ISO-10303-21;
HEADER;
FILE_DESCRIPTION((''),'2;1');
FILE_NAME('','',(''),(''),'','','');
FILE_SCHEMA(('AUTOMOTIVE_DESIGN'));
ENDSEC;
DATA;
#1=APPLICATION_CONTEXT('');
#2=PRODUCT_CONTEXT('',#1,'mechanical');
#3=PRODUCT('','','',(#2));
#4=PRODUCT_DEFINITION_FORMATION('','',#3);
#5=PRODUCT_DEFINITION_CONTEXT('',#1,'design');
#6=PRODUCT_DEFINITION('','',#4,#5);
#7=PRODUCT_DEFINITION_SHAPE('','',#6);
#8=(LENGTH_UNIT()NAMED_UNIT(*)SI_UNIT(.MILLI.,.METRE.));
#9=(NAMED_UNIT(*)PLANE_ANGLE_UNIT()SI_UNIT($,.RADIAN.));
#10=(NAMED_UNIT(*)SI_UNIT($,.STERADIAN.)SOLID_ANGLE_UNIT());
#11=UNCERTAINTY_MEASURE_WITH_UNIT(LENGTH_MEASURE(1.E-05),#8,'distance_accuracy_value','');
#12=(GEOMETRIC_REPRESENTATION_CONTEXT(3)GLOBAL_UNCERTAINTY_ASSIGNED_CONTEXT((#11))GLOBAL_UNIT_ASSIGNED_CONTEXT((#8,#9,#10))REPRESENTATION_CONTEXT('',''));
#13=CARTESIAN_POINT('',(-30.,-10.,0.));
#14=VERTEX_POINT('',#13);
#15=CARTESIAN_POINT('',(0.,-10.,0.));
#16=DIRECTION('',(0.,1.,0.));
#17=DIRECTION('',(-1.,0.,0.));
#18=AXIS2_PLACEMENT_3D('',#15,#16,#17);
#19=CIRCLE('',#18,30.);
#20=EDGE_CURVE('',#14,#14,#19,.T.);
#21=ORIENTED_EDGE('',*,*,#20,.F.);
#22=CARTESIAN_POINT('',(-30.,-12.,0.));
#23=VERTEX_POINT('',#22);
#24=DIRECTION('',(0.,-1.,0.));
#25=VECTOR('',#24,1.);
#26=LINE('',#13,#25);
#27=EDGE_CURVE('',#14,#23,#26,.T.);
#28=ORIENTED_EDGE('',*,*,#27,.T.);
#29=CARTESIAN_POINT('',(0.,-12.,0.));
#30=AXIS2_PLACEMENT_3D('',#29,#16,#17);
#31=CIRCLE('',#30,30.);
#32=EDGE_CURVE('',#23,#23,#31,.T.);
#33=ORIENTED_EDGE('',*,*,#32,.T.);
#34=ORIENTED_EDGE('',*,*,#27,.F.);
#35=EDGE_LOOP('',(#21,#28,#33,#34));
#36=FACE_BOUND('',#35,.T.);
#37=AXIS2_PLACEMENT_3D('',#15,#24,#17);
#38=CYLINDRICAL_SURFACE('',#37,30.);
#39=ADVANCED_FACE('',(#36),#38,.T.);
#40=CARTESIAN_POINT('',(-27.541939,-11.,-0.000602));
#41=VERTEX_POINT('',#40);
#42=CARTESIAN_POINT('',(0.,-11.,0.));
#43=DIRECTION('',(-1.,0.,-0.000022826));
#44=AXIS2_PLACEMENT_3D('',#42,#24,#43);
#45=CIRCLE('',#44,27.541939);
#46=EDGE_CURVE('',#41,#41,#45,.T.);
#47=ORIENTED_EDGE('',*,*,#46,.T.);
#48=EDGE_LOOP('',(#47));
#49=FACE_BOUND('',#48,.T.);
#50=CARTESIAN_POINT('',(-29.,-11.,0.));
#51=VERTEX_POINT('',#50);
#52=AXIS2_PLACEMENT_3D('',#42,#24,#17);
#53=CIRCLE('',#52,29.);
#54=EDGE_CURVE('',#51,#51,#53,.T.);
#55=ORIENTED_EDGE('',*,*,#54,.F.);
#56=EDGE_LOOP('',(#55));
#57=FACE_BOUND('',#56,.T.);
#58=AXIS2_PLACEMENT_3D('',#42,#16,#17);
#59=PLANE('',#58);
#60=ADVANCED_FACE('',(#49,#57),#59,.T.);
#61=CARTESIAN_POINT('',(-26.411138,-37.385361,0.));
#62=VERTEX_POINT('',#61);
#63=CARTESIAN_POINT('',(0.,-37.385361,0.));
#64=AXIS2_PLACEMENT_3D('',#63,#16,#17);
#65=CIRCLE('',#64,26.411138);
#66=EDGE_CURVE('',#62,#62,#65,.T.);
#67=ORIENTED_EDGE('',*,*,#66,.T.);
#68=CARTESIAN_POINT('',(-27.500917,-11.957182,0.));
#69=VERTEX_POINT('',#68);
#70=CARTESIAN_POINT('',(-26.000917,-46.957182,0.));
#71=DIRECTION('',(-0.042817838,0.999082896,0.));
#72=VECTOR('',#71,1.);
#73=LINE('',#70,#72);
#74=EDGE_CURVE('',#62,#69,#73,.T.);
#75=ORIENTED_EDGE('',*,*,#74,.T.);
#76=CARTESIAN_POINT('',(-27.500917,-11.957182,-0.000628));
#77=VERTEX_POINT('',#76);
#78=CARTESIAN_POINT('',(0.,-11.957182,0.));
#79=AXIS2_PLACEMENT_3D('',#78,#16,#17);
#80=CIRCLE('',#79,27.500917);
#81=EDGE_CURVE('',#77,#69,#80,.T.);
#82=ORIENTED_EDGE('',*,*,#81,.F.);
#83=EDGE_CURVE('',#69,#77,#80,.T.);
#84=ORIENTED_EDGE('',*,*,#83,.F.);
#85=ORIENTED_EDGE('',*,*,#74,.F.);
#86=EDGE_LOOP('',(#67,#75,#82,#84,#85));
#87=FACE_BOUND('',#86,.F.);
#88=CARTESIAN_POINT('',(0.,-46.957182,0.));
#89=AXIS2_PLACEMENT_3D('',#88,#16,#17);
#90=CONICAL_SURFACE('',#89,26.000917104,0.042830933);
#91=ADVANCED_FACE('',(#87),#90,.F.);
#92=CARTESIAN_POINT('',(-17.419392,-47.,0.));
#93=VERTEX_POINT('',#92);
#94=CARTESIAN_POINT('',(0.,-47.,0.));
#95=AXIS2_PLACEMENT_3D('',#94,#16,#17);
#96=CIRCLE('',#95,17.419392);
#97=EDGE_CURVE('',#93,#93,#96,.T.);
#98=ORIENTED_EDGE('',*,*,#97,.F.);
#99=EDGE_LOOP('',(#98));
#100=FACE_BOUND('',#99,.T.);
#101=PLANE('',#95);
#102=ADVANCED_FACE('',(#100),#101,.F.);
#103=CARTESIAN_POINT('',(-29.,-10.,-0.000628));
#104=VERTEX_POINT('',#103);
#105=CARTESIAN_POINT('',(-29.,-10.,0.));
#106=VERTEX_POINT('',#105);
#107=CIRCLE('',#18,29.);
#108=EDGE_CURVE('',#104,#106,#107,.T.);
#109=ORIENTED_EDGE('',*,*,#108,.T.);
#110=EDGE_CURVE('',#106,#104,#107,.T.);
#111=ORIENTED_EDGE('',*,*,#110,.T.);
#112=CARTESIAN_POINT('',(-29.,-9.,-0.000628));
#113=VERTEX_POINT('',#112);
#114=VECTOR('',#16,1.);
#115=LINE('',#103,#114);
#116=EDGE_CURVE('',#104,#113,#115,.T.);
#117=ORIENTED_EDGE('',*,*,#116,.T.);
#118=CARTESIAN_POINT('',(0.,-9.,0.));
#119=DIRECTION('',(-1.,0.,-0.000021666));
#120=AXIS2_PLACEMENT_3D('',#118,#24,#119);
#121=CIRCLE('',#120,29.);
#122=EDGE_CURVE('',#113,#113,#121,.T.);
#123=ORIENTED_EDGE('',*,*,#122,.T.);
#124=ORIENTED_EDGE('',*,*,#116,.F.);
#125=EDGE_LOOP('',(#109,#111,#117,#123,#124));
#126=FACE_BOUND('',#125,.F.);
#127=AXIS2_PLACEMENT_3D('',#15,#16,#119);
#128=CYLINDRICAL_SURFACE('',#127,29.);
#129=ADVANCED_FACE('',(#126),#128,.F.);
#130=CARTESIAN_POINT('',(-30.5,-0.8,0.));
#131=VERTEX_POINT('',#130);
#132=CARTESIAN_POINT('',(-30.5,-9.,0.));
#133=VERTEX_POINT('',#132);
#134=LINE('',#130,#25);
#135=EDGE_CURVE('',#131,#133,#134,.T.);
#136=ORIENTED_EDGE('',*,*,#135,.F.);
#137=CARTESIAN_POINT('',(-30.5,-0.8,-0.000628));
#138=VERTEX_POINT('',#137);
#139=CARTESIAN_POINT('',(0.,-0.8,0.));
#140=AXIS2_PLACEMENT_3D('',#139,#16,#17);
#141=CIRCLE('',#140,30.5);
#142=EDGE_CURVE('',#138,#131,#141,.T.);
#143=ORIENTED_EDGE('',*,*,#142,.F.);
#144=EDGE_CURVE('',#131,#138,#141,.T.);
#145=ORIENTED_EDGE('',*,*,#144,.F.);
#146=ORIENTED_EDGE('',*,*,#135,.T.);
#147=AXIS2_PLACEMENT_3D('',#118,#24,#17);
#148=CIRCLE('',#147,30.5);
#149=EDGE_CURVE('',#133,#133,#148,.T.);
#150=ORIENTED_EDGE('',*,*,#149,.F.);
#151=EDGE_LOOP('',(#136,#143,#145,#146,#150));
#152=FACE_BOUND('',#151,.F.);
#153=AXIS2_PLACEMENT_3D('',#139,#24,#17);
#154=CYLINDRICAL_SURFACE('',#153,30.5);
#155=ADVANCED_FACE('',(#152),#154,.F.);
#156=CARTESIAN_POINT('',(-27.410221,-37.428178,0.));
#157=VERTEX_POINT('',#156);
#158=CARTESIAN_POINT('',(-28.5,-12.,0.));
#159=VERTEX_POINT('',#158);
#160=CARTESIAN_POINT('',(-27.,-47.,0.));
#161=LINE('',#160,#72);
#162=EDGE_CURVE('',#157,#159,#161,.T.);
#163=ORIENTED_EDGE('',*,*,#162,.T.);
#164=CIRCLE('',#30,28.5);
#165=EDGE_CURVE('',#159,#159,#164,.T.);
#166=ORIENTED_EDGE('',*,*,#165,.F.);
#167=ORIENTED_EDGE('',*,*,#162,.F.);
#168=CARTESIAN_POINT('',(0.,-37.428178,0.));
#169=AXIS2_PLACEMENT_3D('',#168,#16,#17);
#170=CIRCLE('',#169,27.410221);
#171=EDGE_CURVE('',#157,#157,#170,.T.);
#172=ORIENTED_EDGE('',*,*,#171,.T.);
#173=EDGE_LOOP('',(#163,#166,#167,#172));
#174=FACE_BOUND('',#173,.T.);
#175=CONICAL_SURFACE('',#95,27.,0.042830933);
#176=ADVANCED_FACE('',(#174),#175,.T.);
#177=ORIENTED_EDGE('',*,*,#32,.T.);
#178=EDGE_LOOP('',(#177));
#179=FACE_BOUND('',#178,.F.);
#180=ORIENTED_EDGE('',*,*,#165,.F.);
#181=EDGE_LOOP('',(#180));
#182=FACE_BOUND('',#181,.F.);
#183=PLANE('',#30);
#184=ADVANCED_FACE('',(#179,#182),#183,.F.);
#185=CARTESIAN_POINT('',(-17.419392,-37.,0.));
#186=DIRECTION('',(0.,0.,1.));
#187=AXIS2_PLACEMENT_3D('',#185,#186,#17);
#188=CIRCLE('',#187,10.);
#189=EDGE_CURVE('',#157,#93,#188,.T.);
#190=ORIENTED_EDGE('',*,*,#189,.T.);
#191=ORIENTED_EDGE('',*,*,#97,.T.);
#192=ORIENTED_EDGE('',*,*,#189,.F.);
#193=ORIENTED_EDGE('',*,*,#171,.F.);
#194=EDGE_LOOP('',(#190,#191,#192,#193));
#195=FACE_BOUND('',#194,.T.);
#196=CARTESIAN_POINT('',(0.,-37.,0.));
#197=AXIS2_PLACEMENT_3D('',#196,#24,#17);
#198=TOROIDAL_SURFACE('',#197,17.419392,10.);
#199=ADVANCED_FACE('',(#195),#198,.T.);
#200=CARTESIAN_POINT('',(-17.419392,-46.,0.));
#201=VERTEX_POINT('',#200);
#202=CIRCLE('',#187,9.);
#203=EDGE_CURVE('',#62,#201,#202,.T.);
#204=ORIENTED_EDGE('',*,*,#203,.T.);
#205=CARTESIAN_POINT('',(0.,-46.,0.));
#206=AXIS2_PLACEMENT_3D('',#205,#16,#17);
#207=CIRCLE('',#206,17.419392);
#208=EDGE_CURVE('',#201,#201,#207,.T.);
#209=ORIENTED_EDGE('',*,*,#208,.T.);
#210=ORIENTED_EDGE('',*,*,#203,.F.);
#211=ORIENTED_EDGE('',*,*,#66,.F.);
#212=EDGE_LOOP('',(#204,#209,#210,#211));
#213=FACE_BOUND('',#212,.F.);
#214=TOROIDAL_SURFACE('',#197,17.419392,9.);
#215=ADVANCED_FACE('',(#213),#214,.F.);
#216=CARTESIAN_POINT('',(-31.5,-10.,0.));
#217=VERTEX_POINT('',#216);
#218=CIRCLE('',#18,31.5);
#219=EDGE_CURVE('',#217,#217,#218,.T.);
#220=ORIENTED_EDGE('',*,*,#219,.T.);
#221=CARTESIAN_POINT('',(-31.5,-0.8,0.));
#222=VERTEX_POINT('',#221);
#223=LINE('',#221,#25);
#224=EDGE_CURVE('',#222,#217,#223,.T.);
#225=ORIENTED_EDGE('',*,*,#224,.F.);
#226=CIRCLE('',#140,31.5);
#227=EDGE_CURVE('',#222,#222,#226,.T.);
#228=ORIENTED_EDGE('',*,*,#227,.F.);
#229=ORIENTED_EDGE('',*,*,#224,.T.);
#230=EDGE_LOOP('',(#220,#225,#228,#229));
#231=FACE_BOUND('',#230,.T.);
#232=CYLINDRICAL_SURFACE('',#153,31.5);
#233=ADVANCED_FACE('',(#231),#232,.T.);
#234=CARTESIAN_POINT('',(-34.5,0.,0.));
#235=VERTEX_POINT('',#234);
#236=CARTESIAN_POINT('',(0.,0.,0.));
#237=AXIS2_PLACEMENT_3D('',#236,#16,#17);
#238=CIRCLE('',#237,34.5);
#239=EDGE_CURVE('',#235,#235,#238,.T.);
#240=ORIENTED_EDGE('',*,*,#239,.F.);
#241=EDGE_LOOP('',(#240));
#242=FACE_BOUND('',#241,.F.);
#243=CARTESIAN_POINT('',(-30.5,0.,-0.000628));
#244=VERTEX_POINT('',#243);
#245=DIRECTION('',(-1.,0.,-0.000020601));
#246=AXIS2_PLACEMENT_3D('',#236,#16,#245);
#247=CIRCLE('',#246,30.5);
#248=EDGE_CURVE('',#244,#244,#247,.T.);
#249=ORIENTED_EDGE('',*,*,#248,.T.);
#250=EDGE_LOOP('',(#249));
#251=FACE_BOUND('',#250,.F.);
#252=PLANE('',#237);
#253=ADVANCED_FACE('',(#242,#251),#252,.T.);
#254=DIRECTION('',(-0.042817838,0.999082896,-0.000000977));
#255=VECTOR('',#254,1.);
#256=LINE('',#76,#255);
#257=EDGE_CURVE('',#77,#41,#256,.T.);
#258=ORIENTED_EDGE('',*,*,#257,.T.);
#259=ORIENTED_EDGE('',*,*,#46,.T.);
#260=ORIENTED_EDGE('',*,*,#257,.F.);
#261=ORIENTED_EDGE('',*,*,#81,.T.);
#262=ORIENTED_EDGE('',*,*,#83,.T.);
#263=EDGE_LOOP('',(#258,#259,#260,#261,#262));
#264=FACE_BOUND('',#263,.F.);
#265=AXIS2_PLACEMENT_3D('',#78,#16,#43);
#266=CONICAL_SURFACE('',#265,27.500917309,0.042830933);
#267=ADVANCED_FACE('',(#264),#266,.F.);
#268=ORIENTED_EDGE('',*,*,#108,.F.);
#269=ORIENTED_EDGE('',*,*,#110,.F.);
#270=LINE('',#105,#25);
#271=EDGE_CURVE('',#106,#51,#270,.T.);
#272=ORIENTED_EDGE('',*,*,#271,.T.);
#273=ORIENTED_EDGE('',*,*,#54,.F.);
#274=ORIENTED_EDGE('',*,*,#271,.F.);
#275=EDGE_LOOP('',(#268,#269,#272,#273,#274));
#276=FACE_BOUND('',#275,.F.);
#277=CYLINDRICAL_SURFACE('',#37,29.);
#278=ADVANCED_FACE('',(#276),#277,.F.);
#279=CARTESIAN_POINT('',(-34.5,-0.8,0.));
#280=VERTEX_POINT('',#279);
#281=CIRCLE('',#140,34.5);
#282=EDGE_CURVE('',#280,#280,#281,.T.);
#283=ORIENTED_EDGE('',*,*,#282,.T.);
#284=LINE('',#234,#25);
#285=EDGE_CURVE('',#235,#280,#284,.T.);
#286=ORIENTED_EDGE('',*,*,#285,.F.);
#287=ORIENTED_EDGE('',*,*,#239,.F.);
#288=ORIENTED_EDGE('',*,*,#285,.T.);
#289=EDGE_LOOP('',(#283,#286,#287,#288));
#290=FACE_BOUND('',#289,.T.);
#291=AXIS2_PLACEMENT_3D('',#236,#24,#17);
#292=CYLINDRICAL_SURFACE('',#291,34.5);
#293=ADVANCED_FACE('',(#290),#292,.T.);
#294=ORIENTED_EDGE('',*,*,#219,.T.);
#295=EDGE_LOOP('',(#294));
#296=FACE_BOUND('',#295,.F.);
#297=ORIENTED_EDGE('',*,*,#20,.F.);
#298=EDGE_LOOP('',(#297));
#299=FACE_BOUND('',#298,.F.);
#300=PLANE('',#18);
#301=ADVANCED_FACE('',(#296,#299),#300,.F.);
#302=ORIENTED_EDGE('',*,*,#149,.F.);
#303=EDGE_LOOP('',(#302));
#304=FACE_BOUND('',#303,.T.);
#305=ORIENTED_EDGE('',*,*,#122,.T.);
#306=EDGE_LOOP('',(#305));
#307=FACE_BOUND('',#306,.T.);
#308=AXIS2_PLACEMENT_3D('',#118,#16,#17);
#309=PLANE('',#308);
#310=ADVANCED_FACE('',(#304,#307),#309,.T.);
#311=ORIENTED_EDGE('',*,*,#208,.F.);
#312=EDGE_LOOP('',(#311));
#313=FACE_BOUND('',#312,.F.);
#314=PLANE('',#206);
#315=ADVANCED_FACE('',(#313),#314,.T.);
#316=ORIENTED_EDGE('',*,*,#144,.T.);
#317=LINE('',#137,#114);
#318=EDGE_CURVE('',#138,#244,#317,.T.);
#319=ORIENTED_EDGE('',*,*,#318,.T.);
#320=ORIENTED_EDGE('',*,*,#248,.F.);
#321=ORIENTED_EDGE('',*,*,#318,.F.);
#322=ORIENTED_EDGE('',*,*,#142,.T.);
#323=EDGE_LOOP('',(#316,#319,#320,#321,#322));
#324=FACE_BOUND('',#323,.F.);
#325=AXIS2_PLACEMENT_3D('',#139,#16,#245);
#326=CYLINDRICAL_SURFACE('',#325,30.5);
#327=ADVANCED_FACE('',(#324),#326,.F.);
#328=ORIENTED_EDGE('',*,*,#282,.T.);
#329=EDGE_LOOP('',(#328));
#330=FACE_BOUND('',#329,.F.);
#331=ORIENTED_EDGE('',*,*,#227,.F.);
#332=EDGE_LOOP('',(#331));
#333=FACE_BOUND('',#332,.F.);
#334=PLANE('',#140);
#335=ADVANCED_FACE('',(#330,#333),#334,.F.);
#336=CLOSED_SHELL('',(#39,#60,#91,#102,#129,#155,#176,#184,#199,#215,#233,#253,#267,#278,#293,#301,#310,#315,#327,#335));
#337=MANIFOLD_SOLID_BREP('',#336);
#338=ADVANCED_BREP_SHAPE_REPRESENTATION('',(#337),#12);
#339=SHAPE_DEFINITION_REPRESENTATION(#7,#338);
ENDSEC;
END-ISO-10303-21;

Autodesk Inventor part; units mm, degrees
ref_plane "YZ Plane" through (0, 0, 0) normal (1, 0, 0) x (0, 1, 0)
ref_plane "XZ Plane" through (0, 0, 0) normal (0, 1, 0) x (-1, 0, 0)
ref_plane "XY Plane" through (0, 0, 0) normal (0, 0, 1) x (1, 0, 0)
sketch "草圖1" plane through (0, 0, 0) normal (0, 0, 1) x (1, 0, 0)
  line L0 (0, 0) -> (-34.5, 0)
  line L1 (-34.5, 0) -> (-34.5, -0.8)
  line L2 (-34.5, -0.8) -> (0, -0.8)
  line L3 (0, -0.8) -> (0, 0)
  line L4 (0, -0.8) -> (-31.5, -0.8)
  line L5 (-31.5, -0.8) -> (-31.5, -10)
  line L6 (-31.5, -10) -> (0, -10)
  line L7 (0, -10) -> (0, -0.8)
  line L8 (0, -10) -> (-30, -10)
  line L9 (-30, -10) -> (-30, -12)
  line L10 (-30, -12) -> (0, -12)
  line L11 (0, -12) -> (0, -10)
  line L12 (-18.0931, -47) -> (0, -47)
  line L13 (0, -47) -> (0, -12)
  line L14 (0, -47) -> (-20, -47)
  line L15 (-20, -47) -> (-20, -50)
  line L16 (-20, -50) -> (0, -50)
  line L17 (0, -50) -> (0, -47)
  line L18 (0, -50) -> (-19.9, -50)
  line L19 (-19.9, -50) -> (-19.9, -55)
  line L20 (-19.9, -55) -> (0, -55)
  line L21 (0, -55) -> (0, -50)
  line L22 (0, -47) -> (-27, -47)
  line L23 (-27, -47) -> (-28.5, -12)
  dimension "d0" = 0.8
  dimension "d1" = 34.5
  dimension "d2" = 20
  dimension "d3" = 31.5
  dimension "d4" = 30
  dimension "d5" = 9.2
  dimension "d6" = 2
  dimension "d8" = 3
  dimension "d9" = 28.5
  dimension "d10" = 27
  dimension "d11" = 19.9
  dimension "d12" = 35
  dimension "d13" = 5
revolve "迴轉1" add sketch "草圖1" angle 360 about axis through (0, -47, 0) along (0, 1, 0) contours L3 L2 L1 L0 | L7 L6 L5 L2 | L11 L10 L9 L6 | L13 L12 L14 L22 L23 L10
fillet "圓角1" radius 10 1 edges at (27, -47, 0)
shell "薄殼1" thickness 1 removed faces 1 at (11.3362, 0, -5.1612)
properties part number "布丁"
